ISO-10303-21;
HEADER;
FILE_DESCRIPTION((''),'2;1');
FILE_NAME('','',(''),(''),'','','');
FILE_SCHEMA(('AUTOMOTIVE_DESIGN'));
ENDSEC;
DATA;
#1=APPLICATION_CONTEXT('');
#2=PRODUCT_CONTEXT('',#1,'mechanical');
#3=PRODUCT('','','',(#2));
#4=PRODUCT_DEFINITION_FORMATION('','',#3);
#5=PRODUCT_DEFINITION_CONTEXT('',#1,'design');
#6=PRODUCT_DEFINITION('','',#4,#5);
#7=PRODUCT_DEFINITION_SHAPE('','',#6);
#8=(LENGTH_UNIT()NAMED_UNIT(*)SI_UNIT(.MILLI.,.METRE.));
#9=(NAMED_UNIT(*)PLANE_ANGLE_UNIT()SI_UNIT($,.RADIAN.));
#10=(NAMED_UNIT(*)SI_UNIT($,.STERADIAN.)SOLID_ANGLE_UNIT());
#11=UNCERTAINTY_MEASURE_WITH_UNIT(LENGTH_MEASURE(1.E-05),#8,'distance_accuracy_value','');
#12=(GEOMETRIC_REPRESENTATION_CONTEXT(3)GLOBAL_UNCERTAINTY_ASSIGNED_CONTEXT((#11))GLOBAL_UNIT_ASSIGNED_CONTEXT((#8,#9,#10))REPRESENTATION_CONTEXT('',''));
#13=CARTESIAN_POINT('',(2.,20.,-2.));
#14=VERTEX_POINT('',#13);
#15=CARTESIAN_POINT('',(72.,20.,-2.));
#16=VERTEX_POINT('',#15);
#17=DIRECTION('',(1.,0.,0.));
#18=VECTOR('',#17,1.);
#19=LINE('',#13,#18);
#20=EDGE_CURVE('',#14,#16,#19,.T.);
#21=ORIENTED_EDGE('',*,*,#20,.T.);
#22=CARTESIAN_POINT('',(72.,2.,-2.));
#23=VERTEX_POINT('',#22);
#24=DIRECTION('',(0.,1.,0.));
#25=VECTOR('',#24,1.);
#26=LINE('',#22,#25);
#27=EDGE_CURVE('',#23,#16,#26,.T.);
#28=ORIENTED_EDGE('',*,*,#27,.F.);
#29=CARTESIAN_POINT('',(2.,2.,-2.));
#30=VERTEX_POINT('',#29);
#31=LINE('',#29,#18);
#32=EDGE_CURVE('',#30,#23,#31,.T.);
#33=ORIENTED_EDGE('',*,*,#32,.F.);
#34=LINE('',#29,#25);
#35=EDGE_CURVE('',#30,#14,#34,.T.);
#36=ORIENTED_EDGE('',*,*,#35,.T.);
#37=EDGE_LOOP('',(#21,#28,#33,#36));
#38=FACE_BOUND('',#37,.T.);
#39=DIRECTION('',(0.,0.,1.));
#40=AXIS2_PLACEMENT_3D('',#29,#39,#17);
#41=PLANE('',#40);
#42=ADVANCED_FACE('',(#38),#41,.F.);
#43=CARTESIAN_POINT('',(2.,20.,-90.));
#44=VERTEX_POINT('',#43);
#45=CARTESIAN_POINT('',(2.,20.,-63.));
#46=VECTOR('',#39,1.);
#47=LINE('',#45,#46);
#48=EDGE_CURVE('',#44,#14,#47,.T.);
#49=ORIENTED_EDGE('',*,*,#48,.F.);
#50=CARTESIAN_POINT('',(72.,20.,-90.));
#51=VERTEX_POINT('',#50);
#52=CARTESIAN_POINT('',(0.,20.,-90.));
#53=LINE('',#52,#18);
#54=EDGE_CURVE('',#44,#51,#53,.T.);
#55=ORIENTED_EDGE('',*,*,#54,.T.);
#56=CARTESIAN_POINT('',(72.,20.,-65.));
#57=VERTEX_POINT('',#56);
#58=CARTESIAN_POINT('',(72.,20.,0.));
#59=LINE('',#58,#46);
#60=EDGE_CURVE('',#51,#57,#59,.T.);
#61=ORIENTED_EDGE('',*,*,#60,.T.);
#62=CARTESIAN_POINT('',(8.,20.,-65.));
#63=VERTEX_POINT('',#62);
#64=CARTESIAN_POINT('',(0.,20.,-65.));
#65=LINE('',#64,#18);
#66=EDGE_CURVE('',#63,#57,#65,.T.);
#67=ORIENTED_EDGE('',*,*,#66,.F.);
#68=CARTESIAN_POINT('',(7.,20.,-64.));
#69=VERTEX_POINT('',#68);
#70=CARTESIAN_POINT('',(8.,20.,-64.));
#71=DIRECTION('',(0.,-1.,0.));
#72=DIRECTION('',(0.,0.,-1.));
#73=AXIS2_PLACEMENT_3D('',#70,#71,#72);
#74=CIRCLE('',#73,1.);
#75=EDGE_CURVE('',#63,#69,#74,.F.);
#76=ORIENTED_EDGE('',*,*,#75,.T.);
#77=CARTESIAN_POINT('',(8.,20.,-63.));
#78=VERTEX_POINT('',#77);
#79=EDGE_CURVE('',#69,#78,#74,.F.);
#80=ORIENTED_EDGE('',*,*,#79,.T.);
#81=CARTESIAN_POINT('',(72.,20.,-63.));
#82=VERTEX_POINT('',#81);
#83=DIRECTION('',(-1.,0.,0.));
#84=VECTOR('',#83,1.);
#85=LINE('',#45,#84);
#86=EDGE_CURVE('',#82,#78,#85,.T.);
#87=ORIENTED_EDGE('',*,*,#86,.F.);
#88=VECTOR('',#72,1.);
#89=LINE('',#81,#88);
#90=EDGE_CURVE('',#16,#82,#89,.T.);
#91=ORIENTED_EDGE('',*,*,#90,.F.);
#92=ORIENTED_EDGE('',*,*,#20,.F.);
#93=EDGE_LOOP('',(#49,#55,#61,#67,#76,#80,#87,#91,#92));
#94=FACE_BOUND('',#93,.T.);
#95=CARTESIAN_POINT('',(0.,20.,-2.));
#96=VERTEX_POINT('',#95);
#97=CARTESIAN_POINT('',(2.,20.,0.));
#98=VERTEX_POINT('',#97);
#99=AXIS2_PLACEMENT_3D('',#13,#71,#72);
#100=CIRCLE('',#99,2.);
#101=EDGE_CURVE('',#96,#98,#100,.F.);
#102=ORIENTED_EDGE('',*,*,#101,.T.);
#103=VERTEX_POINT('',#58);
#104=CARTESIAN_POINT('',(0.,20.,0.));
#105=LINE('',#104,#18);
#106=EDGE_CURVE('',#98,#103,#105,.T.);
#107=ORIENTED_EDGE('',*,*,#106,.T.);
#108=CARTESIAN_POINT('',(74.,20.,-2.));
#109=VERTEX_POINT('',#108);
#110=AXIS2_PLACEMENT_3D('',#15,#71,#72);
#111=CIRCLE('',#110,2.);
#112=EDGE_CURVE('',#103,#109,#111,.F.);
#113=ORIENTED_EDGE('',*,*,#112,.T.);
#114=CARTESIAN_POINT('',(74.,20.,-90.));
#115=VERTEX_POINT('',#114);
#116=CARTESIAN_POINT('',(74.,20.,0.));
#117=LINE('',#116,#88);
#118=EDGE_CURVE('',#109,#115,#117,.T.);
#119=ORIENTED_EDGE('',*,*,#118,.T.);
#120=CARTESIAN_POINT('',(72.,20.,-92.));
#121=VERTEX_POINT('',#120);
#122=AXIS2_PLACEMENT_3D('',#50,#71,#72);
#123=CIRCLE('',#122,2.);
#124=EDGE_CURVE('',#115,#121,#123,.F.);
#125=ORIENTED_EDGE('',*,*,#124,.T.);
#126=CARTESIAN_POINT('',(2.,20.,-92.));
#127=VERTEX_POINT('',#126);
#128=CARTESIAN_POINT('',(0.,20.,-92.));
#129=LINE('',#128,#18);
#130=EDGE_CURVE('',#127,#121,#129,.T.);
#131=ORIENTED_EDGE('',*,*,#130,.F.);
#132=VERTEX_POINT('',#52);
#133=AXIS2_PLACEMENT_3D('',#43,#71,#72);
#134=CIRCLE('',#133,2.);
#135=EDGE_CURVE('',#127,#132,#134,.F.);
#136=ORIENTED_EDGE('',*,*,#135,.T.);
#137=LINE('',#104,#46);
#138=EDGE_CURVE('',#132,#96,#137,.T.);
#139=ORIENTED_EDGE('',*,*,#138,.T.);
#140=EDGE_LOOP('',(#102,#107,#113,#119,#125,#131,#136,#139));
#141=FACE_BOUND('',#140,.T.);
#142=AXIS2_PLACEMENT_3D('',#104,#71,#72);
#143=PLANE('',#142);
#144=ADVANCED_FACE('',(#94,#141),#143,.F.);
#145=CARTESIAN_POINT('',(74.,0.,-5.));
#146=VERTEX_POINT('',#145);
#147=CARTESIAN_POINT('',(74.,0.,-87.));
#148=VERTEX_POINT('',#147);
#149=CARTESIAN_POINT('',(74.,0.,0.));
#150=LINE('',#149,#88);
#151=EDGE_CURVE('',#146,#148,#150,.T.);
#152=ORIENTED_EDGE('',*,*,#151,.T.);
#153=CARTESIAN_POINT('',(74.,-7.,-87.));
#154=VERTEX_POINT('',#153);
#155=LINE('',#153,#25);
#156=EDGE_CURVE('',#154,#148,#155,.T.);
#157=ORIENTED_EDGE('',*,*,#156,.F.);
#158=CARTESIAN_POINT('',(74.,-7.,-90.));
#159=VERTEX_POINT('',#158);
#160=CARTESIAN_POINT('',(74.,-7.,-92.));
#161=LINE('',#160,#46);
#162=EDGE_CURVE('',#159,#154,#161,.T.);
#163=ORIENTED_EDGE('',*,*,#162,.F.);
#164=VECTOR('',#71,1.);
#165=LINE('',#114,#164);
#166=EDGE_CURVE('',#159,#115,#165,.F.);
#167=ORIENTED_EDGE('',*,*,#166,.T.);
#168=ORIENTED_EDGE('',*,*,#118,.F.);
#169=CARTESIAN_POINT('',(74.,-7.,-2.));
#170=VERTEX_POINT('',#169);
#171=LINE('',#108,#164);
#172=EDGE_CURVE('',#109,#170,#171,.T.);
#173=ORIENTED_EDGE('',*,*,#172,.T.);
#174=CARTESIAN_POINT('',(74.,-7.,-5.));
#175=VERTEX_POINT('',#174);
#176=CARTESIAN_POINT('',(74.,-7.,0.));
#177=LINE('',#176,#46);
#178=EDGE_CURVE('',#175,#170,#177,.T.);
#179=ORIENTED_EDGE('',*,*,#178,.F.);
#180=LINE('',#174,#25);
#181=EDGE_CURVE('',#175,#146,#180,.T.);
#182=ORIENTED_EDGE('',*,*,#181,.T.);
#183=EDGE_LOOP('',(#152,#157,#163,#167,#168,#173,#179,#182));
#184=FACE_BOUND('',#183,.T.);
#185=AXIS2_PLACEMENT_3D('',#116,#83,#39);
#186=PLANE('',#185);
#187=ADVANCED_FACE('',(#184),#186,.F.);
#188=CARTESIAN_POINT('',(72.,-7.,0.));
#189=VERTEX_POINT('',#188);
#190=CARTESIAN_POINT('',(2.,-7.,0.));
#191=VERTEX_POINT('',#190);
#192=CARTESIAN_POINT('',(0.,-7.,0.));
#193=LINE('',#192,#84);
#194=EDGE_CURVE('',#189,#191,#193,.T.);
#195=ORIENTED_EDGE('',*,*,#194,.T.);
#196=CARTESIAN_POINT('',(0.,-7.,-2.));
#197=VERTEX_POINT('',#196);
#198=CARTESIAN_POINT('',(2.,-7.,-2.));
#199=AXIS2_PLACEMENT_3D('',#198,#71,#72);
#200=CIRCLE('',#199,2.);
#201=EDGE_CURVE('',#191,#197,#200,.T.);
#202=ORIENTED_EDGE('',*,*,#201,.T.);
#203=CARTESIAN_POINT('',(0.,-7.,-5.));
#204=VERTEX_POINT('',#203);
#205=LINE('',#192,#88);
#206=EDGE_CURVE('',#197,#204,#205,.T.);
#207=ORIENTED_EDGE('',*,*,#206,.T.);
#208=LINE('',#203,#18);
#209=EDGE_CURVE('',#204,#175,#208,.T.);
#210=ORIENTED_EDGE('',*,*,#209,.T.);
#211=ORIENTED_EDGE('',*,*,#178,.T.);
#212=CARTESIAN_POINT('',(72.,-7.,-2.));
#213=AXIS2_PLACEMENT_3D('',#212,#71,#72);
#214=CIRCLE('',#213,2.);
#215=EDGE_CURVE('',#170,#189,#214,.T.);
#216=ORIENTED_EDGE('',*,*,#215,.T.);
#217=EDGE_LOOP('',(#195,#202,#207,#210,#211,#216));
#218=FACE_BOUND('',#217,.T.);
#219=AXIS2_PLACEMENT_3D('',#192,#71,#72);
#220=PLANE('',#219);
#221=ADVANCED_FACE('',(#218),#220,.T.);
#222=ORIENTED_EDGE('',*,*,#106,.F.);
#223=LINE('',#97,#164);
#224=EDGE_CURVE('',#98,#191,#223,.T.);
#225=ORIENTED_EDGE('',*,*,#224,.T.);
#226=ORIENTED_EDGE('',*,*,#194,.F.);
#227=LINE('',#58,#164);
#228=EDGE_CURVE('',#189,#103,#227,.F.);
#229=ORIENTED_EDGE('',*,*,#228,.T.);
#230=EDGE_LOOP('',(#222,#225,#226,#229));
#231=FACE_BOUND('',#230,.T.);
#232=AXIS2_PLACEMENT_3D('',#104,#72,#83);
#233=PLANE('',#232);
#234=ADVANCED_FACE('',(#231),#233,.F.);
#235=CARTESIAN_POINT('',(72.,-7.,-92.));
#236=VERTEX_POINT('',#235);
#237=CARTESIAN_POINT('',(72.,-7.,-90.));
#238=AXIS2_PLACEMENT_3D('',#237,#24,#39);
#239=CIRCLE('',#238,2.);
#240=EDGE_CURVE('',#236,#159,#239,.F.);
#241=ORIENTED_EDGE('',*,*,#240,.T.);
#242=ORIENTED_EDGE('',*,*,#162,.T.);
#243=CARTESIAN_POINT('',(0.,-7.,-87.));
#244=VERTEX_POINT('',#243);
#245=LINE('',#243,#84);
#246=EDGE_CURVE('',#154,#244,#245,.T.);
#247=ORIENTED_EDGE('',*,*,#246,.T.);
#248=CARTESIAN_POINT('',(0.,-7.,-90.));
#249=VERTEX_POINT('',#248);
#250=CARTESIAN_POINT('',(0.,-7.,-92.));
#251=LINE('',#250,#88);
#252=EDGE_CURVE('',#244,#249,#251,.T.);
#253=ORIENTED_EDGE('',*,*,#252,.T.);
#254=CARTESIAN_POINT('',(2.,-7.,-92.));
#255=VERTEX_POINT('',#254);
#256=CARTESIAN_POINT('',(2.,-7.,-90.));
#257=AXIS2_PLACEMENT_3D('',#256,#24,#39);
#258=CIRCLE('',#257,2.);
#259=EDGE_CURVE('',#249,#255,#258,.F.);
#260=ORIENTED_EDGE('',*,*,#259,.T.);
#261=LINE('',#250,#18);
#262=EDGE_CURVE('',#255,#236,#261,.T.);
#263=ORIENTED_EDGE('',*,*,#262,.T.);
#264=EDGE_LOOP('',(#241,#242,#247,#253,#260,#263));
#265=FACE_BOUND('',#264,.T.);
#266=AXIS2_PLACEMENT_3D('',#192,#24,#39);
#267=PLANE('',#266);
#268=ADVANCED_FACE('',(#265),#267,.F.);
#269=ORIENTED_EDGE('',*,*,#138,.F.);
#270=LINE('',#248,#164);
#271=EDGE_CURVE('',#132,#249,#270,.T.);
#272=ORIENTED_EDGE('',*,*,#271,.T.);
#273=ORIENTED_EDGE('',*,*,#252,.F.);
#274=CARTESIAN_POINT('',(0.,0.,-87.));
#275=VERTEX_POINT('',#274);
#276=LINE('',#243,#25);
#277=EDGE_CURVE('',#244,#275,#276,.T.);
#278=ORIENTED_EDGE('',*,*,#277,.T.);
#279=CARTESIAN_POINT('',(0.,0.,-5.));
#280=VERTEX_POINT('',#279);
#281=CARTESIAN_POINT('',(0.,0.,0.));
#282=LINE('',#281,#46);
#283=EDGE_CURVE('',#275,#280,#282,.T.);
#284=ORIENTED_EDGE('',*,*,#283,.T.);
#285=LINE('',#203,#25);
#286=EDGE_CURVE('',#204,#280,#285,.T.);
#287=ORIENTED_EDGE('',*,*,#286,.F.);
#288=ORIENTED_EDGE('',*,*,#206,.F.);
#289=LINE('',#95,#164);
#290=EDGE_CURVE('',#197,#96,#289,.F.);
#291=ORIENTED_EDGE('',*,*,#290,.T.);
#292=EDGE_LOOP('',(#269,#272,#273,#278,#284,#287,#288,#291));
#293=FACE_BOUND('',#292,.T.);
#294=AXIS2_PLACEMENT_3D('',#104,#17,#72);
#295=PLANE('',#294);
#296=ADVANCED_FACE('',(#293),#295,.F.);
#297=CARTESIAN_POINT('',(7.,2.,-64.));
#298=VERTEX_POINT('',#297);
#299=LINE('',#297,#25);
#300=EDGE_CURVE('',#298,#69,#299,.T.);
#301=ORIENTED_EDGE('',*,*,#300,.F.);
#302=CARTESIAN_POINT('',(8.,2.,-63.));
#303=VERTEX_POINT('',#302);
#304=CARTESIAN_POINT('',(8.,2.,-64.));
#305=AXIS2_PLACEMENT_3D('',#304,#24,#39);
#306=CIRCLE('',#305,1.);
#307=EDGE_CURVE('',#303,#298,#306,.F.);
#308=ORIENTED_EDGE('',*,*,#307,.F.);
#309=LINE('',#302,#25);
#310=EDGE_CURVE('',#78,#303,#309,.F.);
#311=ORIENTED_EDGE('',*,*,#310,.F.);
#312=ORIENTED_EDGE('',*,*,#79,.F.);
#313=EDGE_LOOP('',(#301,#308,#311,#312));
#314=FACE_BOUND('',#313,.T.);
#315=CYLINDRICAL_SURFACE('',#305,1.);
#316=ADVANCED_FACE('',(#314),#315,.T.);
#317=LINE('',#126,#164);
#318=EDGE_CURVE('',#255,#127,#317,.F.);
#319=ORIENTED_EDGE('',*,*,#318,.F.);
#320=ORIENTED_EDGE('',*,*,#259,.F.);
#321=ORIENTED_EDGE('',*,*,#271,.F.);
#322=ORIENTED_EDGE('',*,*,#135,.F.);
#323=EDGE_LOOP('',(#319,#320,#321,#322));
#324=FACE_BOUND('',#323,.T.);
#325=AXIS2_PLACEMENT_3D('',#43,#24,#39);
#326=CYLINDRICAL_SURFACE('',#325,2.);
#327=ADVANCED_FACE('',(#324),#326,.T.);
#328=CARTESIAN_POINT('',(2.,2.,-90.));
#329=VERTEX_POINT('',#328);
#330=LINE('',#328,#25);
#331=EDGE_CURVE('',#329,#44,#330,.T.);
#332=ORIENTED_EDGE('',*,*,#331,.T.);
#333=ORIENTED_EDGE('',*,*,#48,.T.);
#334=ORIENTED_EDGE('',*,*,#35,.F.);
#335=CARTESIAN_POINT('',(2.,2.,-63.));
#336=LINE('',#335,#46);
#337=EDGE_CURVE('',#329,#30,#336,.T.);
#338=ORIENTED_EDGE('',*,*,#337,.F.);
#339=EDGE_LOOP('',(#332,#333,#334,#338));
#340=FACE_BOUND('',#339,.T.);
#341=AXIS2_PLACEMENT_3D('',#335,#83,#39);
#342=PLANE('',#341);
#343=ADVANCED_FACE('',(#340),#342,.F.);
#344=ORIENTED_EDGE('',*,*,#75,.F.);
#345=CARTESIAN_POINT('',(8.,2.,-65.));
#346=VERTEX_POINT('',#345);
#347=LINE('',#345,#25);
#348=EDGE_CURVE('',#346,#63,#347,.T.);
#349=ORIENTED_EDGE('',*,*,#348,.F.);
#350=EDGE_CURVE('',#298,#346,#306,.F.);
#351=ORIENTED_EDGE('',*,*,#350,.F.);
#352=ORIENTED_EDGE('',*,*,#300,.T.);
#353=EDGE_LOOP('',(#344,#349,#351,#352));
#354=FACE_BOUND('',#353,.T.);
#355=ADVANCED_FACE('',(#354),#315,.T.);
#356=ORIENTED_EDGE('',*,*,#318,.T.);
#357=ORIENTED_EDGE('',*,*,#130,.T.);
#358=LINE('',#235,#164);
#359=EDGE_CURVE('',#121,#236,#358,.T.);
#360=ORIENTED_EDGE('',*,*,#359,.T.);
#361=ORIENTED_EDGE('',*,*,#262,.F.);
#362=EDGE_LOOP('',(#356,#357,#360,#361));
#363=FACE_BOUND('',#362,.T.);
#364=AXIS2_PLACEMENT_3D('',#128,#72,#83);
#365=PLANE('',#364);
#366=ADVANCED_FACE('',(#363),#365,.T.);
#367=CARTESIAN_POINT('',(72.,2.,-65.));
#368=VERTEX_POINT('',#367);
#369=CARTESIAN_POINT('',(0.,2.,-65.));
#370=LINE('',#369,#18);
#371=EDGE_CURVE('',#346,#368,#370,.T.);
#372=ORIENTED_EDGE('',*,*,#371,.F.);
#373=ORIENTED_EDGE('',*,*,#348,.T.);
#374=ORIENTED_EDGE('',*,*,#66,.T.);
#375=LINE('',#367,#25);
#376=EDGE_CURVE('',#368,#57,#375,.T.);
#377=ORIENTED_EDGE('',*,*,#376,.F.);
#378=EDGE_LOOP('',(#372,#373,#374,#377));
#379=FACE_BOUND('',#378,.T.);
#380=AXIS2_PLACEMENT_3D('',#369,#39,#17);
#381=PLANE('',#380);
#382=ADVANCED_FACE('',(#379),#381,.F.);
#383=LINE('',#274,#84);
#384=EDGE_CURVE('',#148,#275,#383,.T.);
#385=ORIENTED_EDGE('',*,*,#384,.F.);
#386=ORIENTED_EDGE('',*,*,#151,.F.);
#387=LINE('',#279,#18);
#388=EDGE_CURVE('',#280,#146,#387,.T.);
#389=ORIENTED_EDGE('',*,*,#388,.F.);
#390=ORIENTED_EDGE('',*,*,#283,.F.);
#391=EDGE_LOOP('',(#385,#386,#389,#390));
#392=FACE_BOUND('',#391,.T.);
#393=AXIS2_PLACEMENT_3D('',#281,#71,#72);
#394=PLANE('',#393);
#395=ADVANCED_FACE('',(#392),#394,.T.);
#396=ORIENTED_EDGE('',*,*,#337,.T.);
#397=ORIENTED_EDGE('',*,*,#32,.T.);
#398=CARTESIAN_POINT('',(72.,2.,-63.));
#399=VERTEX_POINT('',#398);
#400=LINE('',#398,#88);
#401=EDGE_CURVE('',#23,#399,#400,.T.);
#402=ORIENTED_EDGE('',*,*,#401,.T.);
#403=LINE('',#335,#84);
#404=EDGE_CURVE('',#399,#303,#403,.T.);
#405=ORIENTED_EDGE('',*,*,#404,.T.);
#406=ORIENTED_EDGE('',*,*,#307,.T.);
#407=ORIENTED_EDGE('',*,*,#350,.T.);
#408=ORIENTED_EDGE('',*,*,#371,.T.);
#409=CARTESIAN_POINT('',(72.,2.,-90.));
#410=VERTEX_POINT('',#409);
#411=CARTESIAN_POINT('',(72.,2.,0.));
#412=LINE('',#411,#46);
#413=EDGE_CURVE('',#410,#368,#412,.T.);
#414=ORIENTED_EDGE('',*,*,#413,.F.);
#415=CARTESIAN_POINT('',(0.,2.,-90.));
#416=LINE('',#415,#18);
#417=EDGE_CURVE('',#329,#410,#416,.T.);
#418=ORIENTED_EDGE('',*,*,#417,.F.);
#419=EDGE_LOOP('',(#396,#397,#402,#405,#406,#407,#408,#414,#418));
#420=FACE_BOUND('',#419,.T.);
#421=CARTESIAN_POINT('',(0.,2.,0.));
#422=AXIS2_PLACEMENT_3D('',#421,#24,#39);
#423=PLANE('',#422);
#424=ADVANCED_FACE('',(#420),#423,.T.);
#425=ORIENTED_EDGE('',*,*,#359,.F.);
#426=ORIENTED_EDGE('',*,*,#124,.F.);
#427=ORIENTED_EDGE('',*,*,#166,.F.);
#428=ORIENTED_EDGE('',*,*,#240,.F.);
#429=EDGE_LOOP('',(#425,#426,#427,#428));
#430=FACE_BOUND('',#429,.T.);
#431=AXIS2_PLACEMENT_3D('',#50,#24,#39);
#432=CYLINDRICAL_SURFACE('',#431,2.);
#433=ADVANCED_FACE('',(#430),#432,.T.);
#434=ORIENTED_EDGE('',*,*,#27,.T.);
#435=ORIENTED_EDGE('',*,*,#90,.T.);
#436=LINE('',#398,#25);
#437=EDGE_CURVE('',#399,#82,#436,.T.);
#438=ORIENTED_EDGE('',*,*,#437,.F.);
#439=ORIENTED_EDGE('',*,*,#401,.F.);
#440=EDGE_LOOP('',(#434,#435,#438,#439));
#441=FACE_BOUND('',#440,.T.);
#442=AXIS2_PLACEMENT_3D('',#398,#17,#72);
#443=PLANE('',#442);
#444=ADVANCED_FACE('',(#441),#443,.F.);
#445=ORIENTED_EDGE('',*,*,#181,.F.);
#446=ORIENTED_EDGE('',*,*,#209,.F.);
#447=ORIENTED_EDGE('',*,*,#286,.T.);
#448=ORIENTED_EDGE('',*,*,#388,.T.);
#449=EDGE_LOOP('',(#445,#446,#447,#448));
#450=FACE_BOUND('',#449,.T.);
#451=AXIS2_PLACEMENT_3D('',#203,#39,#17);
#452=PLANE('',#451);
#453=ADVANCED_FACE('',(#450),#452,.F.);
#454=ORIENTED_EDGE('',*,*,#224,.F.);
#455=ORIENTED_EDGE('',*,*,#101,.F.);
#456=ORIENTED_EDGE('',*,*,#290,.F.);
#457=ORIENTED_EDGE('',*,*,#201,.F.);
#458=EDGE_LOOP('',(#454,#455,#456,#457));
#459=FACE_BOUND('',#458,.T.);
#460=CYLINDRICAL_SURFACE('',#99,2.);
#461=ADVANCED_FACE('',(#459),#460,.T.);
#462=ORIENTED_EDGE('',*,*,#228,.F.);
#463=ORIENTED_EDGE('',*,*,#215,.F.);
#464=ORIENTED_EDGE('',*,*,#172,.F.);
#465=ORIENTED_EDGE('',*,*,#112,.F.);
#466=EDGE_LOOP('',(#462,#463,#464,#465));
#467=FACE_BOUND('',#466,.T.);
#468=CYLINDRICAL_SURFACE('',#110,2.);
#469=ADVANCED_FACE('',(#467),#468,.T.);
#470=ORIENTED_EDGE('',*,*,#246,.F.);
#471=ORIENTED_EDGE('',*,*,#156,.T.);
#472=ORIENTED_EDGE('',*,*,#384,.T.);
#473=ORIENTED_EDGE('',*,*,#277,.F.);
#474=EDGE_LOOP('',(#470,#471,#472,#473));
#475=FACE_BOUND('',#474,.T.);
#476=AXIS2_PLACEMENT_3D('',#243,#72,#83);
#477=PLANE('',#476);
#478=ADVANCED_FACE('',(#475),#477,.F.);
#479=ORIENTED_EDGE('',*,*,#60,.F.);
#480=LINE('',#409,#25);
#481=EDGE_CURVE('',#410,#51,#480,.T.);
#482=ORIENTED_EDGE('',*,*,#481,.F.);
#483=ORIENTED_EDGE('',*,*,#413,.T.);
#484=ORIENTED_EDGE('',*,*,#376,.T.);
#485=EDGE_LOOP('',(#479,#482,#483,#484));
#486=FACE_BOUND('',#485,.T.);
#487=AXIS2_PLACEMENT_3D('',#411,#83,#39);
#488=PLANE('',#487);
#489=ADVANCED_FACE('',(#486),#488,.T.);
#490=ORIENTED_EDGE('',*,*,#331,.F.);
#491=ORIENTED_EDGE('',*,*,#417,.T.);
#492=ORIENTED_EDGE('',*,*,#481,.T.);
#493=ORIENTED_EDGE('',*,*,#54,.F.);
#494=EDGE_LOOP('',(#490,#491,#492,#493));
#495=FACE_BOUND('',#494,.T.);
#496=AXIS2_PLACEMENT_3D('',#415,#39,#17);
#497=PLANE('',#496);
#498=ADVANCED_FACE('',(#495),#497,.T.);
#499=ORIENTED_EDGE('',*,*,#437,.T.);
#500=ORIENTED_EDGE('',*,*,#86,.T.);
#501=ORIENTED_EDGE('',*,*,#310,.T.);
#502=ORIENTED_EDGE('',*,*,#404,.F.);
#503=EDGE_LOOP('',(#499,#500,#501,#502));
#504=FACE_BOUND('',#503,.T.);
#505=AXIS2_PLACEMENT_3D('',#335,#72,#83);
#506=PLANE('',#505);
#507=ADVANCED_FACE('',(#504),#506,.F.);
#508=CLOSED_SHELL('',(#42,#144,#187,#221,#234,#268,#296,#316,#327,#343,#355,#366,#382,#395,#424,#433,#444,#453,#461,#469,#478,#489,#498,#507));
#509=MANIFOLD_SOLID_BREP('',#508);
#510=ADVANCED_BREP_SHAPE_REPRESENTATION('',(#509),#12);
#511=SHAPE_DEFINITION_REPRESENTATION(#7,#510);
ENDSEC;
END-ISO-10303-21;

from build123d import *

# Parameters (mm, degrees)
SKETCH_1_W          = 74
SKETCH_1_H          = 65
EXTRUDE_1_DEPTH     = 20
SKETCH_2_W          = 70
SKETCH_2_H          = 61
CUT_EXTRUDE_1_DEPTH = 18
SKETCH_3_W          = 5
SKETCH_3_H          = 2
CUT_EXTRUDE_2_DEPTH = 18
SKETCH_4_W          = 74
SKETCH_4_H          = 27
EXTRUDE_2_DEPTH     = 20
CUT_EXTRUDE_3_DEPTH = 18
SKETCH_6_W          = 74
SKETCH_6_H          = 5
EXTRUDE_3_DEPTH     = 7
FILLET_1_R          = 2
FILLET_2_R          = 2
FILLET_3_R          = 2
FILLET_5_R          = 1


with BuildPart() as part:
    # 草图1 → 凸台-拉伸1 (new body)
    with BuildSketch(Plane(origin=(0, 0, 0), x_dir=(1, 0, 0), z_dir=(0, 1, 0))):
        with Locations((37, 32.5)):
            Rectangle(SKETCH_1_W, SKETCH_1_H)
    extrude(amount=EXTRUDE_1_DEPTH)

    # 草图2 → 切除-拉伸1 (cut)
    with BuildSketch(Plane(origin=(0, 20, 0), x_dir=(1, 0, 0), z_dir=(0, 1, 0))):
        with Locations((37, 32.5)):
            Rectangle(SKETCH_2_W, SKETCH_2_H)
    extrude(amount=-CUT_EXTRUDE_1_DEPTH, mode=Mode.SUBTRACT)

    # 草图3 → 切除-拉伸2 (cut)
    with BuildSketch(Plane(origin=(0, 20, 0), x_dir=(1, 0, 0), z_dir=(0, 1, 0))):
        with Locations((4.5, 64)):
            Rectangle(SKETCH_3_W, SKETCH_3_H)
    extrude(amount=-CUT_EXTRUDE_2_DEPTH, mode=Mode.SUBTRACT)

    # 草图4 → 凸台-拉伸2 (add)
    with BuildSketch(Plane.XZ):
        with Locations((37, -78.5)):
            Rectangle(SKETCH_4_W, SKETCH_4_H)
    extrude(amount=-EXTRUDE_2_DEPTH)

    # 草图5 → 切除-拉伸3 (cut)
    with BuildSketch(Plane(origin=(0, 20, 0), x_dir=(1, 0, 0), z_dir=(0, 1, 0))):
        Polygon((2, 65), (7, 65), (72, 65), (72, 90), (2, 90), align=None)
    extrude(amount=-CUT_EXTRUDE_3_DEPTH, mode=Mode.SUBTRACT)

    # 草图6 → 凸台-拉伸3 (add)
    with BuildSketch(Plane.XZ):
        with Locations((37, -2.5)):
            Rectangle(SKETCH_6_W, SKETCH_6_H)
        with Locations((37, -89.5)):
            Rectangle(SKETCH_6_W, SKETCH_6_H)
    extrude(amount=EXTRUDE_3_DEPTH)

    # 圆角1
    fillet_1_edges = [part.edges().sort_by_distance(p)[0] for p in [
        (0, 6.5, 0),
    ]]
    fillet(fillet_1_edges, radius=FILLET_1_R)

    # 圆角2
    fillet_2_edges = [part.edges().sort_by_distance(p)[0] for p in [
        (74, 6.5, 0),
    ]]
    fillet(fillet_2_edges, radius=FILLET_2_R)

    # 圆角3
    fillet_3_edges = [part.edges().sort_by_distance(p)[0] for p in [
        (0, 6.5, -92),
        (74, 6.5, -92),
    ]]
    fillet(fillet_3_edges, radius=FILLET_3_R)

    # 圆角5
    fillet_5_edges = [part.edges().sort_by_distance(p)[0] for p in [
        (7, 11, -65),
        (7, 11, -63),
    ]]
    fillet(fillet_5_edges, radius=FILLET_5_R - 0.0001)  # a hair under: the kernel refuses the full size


solid = part.part
